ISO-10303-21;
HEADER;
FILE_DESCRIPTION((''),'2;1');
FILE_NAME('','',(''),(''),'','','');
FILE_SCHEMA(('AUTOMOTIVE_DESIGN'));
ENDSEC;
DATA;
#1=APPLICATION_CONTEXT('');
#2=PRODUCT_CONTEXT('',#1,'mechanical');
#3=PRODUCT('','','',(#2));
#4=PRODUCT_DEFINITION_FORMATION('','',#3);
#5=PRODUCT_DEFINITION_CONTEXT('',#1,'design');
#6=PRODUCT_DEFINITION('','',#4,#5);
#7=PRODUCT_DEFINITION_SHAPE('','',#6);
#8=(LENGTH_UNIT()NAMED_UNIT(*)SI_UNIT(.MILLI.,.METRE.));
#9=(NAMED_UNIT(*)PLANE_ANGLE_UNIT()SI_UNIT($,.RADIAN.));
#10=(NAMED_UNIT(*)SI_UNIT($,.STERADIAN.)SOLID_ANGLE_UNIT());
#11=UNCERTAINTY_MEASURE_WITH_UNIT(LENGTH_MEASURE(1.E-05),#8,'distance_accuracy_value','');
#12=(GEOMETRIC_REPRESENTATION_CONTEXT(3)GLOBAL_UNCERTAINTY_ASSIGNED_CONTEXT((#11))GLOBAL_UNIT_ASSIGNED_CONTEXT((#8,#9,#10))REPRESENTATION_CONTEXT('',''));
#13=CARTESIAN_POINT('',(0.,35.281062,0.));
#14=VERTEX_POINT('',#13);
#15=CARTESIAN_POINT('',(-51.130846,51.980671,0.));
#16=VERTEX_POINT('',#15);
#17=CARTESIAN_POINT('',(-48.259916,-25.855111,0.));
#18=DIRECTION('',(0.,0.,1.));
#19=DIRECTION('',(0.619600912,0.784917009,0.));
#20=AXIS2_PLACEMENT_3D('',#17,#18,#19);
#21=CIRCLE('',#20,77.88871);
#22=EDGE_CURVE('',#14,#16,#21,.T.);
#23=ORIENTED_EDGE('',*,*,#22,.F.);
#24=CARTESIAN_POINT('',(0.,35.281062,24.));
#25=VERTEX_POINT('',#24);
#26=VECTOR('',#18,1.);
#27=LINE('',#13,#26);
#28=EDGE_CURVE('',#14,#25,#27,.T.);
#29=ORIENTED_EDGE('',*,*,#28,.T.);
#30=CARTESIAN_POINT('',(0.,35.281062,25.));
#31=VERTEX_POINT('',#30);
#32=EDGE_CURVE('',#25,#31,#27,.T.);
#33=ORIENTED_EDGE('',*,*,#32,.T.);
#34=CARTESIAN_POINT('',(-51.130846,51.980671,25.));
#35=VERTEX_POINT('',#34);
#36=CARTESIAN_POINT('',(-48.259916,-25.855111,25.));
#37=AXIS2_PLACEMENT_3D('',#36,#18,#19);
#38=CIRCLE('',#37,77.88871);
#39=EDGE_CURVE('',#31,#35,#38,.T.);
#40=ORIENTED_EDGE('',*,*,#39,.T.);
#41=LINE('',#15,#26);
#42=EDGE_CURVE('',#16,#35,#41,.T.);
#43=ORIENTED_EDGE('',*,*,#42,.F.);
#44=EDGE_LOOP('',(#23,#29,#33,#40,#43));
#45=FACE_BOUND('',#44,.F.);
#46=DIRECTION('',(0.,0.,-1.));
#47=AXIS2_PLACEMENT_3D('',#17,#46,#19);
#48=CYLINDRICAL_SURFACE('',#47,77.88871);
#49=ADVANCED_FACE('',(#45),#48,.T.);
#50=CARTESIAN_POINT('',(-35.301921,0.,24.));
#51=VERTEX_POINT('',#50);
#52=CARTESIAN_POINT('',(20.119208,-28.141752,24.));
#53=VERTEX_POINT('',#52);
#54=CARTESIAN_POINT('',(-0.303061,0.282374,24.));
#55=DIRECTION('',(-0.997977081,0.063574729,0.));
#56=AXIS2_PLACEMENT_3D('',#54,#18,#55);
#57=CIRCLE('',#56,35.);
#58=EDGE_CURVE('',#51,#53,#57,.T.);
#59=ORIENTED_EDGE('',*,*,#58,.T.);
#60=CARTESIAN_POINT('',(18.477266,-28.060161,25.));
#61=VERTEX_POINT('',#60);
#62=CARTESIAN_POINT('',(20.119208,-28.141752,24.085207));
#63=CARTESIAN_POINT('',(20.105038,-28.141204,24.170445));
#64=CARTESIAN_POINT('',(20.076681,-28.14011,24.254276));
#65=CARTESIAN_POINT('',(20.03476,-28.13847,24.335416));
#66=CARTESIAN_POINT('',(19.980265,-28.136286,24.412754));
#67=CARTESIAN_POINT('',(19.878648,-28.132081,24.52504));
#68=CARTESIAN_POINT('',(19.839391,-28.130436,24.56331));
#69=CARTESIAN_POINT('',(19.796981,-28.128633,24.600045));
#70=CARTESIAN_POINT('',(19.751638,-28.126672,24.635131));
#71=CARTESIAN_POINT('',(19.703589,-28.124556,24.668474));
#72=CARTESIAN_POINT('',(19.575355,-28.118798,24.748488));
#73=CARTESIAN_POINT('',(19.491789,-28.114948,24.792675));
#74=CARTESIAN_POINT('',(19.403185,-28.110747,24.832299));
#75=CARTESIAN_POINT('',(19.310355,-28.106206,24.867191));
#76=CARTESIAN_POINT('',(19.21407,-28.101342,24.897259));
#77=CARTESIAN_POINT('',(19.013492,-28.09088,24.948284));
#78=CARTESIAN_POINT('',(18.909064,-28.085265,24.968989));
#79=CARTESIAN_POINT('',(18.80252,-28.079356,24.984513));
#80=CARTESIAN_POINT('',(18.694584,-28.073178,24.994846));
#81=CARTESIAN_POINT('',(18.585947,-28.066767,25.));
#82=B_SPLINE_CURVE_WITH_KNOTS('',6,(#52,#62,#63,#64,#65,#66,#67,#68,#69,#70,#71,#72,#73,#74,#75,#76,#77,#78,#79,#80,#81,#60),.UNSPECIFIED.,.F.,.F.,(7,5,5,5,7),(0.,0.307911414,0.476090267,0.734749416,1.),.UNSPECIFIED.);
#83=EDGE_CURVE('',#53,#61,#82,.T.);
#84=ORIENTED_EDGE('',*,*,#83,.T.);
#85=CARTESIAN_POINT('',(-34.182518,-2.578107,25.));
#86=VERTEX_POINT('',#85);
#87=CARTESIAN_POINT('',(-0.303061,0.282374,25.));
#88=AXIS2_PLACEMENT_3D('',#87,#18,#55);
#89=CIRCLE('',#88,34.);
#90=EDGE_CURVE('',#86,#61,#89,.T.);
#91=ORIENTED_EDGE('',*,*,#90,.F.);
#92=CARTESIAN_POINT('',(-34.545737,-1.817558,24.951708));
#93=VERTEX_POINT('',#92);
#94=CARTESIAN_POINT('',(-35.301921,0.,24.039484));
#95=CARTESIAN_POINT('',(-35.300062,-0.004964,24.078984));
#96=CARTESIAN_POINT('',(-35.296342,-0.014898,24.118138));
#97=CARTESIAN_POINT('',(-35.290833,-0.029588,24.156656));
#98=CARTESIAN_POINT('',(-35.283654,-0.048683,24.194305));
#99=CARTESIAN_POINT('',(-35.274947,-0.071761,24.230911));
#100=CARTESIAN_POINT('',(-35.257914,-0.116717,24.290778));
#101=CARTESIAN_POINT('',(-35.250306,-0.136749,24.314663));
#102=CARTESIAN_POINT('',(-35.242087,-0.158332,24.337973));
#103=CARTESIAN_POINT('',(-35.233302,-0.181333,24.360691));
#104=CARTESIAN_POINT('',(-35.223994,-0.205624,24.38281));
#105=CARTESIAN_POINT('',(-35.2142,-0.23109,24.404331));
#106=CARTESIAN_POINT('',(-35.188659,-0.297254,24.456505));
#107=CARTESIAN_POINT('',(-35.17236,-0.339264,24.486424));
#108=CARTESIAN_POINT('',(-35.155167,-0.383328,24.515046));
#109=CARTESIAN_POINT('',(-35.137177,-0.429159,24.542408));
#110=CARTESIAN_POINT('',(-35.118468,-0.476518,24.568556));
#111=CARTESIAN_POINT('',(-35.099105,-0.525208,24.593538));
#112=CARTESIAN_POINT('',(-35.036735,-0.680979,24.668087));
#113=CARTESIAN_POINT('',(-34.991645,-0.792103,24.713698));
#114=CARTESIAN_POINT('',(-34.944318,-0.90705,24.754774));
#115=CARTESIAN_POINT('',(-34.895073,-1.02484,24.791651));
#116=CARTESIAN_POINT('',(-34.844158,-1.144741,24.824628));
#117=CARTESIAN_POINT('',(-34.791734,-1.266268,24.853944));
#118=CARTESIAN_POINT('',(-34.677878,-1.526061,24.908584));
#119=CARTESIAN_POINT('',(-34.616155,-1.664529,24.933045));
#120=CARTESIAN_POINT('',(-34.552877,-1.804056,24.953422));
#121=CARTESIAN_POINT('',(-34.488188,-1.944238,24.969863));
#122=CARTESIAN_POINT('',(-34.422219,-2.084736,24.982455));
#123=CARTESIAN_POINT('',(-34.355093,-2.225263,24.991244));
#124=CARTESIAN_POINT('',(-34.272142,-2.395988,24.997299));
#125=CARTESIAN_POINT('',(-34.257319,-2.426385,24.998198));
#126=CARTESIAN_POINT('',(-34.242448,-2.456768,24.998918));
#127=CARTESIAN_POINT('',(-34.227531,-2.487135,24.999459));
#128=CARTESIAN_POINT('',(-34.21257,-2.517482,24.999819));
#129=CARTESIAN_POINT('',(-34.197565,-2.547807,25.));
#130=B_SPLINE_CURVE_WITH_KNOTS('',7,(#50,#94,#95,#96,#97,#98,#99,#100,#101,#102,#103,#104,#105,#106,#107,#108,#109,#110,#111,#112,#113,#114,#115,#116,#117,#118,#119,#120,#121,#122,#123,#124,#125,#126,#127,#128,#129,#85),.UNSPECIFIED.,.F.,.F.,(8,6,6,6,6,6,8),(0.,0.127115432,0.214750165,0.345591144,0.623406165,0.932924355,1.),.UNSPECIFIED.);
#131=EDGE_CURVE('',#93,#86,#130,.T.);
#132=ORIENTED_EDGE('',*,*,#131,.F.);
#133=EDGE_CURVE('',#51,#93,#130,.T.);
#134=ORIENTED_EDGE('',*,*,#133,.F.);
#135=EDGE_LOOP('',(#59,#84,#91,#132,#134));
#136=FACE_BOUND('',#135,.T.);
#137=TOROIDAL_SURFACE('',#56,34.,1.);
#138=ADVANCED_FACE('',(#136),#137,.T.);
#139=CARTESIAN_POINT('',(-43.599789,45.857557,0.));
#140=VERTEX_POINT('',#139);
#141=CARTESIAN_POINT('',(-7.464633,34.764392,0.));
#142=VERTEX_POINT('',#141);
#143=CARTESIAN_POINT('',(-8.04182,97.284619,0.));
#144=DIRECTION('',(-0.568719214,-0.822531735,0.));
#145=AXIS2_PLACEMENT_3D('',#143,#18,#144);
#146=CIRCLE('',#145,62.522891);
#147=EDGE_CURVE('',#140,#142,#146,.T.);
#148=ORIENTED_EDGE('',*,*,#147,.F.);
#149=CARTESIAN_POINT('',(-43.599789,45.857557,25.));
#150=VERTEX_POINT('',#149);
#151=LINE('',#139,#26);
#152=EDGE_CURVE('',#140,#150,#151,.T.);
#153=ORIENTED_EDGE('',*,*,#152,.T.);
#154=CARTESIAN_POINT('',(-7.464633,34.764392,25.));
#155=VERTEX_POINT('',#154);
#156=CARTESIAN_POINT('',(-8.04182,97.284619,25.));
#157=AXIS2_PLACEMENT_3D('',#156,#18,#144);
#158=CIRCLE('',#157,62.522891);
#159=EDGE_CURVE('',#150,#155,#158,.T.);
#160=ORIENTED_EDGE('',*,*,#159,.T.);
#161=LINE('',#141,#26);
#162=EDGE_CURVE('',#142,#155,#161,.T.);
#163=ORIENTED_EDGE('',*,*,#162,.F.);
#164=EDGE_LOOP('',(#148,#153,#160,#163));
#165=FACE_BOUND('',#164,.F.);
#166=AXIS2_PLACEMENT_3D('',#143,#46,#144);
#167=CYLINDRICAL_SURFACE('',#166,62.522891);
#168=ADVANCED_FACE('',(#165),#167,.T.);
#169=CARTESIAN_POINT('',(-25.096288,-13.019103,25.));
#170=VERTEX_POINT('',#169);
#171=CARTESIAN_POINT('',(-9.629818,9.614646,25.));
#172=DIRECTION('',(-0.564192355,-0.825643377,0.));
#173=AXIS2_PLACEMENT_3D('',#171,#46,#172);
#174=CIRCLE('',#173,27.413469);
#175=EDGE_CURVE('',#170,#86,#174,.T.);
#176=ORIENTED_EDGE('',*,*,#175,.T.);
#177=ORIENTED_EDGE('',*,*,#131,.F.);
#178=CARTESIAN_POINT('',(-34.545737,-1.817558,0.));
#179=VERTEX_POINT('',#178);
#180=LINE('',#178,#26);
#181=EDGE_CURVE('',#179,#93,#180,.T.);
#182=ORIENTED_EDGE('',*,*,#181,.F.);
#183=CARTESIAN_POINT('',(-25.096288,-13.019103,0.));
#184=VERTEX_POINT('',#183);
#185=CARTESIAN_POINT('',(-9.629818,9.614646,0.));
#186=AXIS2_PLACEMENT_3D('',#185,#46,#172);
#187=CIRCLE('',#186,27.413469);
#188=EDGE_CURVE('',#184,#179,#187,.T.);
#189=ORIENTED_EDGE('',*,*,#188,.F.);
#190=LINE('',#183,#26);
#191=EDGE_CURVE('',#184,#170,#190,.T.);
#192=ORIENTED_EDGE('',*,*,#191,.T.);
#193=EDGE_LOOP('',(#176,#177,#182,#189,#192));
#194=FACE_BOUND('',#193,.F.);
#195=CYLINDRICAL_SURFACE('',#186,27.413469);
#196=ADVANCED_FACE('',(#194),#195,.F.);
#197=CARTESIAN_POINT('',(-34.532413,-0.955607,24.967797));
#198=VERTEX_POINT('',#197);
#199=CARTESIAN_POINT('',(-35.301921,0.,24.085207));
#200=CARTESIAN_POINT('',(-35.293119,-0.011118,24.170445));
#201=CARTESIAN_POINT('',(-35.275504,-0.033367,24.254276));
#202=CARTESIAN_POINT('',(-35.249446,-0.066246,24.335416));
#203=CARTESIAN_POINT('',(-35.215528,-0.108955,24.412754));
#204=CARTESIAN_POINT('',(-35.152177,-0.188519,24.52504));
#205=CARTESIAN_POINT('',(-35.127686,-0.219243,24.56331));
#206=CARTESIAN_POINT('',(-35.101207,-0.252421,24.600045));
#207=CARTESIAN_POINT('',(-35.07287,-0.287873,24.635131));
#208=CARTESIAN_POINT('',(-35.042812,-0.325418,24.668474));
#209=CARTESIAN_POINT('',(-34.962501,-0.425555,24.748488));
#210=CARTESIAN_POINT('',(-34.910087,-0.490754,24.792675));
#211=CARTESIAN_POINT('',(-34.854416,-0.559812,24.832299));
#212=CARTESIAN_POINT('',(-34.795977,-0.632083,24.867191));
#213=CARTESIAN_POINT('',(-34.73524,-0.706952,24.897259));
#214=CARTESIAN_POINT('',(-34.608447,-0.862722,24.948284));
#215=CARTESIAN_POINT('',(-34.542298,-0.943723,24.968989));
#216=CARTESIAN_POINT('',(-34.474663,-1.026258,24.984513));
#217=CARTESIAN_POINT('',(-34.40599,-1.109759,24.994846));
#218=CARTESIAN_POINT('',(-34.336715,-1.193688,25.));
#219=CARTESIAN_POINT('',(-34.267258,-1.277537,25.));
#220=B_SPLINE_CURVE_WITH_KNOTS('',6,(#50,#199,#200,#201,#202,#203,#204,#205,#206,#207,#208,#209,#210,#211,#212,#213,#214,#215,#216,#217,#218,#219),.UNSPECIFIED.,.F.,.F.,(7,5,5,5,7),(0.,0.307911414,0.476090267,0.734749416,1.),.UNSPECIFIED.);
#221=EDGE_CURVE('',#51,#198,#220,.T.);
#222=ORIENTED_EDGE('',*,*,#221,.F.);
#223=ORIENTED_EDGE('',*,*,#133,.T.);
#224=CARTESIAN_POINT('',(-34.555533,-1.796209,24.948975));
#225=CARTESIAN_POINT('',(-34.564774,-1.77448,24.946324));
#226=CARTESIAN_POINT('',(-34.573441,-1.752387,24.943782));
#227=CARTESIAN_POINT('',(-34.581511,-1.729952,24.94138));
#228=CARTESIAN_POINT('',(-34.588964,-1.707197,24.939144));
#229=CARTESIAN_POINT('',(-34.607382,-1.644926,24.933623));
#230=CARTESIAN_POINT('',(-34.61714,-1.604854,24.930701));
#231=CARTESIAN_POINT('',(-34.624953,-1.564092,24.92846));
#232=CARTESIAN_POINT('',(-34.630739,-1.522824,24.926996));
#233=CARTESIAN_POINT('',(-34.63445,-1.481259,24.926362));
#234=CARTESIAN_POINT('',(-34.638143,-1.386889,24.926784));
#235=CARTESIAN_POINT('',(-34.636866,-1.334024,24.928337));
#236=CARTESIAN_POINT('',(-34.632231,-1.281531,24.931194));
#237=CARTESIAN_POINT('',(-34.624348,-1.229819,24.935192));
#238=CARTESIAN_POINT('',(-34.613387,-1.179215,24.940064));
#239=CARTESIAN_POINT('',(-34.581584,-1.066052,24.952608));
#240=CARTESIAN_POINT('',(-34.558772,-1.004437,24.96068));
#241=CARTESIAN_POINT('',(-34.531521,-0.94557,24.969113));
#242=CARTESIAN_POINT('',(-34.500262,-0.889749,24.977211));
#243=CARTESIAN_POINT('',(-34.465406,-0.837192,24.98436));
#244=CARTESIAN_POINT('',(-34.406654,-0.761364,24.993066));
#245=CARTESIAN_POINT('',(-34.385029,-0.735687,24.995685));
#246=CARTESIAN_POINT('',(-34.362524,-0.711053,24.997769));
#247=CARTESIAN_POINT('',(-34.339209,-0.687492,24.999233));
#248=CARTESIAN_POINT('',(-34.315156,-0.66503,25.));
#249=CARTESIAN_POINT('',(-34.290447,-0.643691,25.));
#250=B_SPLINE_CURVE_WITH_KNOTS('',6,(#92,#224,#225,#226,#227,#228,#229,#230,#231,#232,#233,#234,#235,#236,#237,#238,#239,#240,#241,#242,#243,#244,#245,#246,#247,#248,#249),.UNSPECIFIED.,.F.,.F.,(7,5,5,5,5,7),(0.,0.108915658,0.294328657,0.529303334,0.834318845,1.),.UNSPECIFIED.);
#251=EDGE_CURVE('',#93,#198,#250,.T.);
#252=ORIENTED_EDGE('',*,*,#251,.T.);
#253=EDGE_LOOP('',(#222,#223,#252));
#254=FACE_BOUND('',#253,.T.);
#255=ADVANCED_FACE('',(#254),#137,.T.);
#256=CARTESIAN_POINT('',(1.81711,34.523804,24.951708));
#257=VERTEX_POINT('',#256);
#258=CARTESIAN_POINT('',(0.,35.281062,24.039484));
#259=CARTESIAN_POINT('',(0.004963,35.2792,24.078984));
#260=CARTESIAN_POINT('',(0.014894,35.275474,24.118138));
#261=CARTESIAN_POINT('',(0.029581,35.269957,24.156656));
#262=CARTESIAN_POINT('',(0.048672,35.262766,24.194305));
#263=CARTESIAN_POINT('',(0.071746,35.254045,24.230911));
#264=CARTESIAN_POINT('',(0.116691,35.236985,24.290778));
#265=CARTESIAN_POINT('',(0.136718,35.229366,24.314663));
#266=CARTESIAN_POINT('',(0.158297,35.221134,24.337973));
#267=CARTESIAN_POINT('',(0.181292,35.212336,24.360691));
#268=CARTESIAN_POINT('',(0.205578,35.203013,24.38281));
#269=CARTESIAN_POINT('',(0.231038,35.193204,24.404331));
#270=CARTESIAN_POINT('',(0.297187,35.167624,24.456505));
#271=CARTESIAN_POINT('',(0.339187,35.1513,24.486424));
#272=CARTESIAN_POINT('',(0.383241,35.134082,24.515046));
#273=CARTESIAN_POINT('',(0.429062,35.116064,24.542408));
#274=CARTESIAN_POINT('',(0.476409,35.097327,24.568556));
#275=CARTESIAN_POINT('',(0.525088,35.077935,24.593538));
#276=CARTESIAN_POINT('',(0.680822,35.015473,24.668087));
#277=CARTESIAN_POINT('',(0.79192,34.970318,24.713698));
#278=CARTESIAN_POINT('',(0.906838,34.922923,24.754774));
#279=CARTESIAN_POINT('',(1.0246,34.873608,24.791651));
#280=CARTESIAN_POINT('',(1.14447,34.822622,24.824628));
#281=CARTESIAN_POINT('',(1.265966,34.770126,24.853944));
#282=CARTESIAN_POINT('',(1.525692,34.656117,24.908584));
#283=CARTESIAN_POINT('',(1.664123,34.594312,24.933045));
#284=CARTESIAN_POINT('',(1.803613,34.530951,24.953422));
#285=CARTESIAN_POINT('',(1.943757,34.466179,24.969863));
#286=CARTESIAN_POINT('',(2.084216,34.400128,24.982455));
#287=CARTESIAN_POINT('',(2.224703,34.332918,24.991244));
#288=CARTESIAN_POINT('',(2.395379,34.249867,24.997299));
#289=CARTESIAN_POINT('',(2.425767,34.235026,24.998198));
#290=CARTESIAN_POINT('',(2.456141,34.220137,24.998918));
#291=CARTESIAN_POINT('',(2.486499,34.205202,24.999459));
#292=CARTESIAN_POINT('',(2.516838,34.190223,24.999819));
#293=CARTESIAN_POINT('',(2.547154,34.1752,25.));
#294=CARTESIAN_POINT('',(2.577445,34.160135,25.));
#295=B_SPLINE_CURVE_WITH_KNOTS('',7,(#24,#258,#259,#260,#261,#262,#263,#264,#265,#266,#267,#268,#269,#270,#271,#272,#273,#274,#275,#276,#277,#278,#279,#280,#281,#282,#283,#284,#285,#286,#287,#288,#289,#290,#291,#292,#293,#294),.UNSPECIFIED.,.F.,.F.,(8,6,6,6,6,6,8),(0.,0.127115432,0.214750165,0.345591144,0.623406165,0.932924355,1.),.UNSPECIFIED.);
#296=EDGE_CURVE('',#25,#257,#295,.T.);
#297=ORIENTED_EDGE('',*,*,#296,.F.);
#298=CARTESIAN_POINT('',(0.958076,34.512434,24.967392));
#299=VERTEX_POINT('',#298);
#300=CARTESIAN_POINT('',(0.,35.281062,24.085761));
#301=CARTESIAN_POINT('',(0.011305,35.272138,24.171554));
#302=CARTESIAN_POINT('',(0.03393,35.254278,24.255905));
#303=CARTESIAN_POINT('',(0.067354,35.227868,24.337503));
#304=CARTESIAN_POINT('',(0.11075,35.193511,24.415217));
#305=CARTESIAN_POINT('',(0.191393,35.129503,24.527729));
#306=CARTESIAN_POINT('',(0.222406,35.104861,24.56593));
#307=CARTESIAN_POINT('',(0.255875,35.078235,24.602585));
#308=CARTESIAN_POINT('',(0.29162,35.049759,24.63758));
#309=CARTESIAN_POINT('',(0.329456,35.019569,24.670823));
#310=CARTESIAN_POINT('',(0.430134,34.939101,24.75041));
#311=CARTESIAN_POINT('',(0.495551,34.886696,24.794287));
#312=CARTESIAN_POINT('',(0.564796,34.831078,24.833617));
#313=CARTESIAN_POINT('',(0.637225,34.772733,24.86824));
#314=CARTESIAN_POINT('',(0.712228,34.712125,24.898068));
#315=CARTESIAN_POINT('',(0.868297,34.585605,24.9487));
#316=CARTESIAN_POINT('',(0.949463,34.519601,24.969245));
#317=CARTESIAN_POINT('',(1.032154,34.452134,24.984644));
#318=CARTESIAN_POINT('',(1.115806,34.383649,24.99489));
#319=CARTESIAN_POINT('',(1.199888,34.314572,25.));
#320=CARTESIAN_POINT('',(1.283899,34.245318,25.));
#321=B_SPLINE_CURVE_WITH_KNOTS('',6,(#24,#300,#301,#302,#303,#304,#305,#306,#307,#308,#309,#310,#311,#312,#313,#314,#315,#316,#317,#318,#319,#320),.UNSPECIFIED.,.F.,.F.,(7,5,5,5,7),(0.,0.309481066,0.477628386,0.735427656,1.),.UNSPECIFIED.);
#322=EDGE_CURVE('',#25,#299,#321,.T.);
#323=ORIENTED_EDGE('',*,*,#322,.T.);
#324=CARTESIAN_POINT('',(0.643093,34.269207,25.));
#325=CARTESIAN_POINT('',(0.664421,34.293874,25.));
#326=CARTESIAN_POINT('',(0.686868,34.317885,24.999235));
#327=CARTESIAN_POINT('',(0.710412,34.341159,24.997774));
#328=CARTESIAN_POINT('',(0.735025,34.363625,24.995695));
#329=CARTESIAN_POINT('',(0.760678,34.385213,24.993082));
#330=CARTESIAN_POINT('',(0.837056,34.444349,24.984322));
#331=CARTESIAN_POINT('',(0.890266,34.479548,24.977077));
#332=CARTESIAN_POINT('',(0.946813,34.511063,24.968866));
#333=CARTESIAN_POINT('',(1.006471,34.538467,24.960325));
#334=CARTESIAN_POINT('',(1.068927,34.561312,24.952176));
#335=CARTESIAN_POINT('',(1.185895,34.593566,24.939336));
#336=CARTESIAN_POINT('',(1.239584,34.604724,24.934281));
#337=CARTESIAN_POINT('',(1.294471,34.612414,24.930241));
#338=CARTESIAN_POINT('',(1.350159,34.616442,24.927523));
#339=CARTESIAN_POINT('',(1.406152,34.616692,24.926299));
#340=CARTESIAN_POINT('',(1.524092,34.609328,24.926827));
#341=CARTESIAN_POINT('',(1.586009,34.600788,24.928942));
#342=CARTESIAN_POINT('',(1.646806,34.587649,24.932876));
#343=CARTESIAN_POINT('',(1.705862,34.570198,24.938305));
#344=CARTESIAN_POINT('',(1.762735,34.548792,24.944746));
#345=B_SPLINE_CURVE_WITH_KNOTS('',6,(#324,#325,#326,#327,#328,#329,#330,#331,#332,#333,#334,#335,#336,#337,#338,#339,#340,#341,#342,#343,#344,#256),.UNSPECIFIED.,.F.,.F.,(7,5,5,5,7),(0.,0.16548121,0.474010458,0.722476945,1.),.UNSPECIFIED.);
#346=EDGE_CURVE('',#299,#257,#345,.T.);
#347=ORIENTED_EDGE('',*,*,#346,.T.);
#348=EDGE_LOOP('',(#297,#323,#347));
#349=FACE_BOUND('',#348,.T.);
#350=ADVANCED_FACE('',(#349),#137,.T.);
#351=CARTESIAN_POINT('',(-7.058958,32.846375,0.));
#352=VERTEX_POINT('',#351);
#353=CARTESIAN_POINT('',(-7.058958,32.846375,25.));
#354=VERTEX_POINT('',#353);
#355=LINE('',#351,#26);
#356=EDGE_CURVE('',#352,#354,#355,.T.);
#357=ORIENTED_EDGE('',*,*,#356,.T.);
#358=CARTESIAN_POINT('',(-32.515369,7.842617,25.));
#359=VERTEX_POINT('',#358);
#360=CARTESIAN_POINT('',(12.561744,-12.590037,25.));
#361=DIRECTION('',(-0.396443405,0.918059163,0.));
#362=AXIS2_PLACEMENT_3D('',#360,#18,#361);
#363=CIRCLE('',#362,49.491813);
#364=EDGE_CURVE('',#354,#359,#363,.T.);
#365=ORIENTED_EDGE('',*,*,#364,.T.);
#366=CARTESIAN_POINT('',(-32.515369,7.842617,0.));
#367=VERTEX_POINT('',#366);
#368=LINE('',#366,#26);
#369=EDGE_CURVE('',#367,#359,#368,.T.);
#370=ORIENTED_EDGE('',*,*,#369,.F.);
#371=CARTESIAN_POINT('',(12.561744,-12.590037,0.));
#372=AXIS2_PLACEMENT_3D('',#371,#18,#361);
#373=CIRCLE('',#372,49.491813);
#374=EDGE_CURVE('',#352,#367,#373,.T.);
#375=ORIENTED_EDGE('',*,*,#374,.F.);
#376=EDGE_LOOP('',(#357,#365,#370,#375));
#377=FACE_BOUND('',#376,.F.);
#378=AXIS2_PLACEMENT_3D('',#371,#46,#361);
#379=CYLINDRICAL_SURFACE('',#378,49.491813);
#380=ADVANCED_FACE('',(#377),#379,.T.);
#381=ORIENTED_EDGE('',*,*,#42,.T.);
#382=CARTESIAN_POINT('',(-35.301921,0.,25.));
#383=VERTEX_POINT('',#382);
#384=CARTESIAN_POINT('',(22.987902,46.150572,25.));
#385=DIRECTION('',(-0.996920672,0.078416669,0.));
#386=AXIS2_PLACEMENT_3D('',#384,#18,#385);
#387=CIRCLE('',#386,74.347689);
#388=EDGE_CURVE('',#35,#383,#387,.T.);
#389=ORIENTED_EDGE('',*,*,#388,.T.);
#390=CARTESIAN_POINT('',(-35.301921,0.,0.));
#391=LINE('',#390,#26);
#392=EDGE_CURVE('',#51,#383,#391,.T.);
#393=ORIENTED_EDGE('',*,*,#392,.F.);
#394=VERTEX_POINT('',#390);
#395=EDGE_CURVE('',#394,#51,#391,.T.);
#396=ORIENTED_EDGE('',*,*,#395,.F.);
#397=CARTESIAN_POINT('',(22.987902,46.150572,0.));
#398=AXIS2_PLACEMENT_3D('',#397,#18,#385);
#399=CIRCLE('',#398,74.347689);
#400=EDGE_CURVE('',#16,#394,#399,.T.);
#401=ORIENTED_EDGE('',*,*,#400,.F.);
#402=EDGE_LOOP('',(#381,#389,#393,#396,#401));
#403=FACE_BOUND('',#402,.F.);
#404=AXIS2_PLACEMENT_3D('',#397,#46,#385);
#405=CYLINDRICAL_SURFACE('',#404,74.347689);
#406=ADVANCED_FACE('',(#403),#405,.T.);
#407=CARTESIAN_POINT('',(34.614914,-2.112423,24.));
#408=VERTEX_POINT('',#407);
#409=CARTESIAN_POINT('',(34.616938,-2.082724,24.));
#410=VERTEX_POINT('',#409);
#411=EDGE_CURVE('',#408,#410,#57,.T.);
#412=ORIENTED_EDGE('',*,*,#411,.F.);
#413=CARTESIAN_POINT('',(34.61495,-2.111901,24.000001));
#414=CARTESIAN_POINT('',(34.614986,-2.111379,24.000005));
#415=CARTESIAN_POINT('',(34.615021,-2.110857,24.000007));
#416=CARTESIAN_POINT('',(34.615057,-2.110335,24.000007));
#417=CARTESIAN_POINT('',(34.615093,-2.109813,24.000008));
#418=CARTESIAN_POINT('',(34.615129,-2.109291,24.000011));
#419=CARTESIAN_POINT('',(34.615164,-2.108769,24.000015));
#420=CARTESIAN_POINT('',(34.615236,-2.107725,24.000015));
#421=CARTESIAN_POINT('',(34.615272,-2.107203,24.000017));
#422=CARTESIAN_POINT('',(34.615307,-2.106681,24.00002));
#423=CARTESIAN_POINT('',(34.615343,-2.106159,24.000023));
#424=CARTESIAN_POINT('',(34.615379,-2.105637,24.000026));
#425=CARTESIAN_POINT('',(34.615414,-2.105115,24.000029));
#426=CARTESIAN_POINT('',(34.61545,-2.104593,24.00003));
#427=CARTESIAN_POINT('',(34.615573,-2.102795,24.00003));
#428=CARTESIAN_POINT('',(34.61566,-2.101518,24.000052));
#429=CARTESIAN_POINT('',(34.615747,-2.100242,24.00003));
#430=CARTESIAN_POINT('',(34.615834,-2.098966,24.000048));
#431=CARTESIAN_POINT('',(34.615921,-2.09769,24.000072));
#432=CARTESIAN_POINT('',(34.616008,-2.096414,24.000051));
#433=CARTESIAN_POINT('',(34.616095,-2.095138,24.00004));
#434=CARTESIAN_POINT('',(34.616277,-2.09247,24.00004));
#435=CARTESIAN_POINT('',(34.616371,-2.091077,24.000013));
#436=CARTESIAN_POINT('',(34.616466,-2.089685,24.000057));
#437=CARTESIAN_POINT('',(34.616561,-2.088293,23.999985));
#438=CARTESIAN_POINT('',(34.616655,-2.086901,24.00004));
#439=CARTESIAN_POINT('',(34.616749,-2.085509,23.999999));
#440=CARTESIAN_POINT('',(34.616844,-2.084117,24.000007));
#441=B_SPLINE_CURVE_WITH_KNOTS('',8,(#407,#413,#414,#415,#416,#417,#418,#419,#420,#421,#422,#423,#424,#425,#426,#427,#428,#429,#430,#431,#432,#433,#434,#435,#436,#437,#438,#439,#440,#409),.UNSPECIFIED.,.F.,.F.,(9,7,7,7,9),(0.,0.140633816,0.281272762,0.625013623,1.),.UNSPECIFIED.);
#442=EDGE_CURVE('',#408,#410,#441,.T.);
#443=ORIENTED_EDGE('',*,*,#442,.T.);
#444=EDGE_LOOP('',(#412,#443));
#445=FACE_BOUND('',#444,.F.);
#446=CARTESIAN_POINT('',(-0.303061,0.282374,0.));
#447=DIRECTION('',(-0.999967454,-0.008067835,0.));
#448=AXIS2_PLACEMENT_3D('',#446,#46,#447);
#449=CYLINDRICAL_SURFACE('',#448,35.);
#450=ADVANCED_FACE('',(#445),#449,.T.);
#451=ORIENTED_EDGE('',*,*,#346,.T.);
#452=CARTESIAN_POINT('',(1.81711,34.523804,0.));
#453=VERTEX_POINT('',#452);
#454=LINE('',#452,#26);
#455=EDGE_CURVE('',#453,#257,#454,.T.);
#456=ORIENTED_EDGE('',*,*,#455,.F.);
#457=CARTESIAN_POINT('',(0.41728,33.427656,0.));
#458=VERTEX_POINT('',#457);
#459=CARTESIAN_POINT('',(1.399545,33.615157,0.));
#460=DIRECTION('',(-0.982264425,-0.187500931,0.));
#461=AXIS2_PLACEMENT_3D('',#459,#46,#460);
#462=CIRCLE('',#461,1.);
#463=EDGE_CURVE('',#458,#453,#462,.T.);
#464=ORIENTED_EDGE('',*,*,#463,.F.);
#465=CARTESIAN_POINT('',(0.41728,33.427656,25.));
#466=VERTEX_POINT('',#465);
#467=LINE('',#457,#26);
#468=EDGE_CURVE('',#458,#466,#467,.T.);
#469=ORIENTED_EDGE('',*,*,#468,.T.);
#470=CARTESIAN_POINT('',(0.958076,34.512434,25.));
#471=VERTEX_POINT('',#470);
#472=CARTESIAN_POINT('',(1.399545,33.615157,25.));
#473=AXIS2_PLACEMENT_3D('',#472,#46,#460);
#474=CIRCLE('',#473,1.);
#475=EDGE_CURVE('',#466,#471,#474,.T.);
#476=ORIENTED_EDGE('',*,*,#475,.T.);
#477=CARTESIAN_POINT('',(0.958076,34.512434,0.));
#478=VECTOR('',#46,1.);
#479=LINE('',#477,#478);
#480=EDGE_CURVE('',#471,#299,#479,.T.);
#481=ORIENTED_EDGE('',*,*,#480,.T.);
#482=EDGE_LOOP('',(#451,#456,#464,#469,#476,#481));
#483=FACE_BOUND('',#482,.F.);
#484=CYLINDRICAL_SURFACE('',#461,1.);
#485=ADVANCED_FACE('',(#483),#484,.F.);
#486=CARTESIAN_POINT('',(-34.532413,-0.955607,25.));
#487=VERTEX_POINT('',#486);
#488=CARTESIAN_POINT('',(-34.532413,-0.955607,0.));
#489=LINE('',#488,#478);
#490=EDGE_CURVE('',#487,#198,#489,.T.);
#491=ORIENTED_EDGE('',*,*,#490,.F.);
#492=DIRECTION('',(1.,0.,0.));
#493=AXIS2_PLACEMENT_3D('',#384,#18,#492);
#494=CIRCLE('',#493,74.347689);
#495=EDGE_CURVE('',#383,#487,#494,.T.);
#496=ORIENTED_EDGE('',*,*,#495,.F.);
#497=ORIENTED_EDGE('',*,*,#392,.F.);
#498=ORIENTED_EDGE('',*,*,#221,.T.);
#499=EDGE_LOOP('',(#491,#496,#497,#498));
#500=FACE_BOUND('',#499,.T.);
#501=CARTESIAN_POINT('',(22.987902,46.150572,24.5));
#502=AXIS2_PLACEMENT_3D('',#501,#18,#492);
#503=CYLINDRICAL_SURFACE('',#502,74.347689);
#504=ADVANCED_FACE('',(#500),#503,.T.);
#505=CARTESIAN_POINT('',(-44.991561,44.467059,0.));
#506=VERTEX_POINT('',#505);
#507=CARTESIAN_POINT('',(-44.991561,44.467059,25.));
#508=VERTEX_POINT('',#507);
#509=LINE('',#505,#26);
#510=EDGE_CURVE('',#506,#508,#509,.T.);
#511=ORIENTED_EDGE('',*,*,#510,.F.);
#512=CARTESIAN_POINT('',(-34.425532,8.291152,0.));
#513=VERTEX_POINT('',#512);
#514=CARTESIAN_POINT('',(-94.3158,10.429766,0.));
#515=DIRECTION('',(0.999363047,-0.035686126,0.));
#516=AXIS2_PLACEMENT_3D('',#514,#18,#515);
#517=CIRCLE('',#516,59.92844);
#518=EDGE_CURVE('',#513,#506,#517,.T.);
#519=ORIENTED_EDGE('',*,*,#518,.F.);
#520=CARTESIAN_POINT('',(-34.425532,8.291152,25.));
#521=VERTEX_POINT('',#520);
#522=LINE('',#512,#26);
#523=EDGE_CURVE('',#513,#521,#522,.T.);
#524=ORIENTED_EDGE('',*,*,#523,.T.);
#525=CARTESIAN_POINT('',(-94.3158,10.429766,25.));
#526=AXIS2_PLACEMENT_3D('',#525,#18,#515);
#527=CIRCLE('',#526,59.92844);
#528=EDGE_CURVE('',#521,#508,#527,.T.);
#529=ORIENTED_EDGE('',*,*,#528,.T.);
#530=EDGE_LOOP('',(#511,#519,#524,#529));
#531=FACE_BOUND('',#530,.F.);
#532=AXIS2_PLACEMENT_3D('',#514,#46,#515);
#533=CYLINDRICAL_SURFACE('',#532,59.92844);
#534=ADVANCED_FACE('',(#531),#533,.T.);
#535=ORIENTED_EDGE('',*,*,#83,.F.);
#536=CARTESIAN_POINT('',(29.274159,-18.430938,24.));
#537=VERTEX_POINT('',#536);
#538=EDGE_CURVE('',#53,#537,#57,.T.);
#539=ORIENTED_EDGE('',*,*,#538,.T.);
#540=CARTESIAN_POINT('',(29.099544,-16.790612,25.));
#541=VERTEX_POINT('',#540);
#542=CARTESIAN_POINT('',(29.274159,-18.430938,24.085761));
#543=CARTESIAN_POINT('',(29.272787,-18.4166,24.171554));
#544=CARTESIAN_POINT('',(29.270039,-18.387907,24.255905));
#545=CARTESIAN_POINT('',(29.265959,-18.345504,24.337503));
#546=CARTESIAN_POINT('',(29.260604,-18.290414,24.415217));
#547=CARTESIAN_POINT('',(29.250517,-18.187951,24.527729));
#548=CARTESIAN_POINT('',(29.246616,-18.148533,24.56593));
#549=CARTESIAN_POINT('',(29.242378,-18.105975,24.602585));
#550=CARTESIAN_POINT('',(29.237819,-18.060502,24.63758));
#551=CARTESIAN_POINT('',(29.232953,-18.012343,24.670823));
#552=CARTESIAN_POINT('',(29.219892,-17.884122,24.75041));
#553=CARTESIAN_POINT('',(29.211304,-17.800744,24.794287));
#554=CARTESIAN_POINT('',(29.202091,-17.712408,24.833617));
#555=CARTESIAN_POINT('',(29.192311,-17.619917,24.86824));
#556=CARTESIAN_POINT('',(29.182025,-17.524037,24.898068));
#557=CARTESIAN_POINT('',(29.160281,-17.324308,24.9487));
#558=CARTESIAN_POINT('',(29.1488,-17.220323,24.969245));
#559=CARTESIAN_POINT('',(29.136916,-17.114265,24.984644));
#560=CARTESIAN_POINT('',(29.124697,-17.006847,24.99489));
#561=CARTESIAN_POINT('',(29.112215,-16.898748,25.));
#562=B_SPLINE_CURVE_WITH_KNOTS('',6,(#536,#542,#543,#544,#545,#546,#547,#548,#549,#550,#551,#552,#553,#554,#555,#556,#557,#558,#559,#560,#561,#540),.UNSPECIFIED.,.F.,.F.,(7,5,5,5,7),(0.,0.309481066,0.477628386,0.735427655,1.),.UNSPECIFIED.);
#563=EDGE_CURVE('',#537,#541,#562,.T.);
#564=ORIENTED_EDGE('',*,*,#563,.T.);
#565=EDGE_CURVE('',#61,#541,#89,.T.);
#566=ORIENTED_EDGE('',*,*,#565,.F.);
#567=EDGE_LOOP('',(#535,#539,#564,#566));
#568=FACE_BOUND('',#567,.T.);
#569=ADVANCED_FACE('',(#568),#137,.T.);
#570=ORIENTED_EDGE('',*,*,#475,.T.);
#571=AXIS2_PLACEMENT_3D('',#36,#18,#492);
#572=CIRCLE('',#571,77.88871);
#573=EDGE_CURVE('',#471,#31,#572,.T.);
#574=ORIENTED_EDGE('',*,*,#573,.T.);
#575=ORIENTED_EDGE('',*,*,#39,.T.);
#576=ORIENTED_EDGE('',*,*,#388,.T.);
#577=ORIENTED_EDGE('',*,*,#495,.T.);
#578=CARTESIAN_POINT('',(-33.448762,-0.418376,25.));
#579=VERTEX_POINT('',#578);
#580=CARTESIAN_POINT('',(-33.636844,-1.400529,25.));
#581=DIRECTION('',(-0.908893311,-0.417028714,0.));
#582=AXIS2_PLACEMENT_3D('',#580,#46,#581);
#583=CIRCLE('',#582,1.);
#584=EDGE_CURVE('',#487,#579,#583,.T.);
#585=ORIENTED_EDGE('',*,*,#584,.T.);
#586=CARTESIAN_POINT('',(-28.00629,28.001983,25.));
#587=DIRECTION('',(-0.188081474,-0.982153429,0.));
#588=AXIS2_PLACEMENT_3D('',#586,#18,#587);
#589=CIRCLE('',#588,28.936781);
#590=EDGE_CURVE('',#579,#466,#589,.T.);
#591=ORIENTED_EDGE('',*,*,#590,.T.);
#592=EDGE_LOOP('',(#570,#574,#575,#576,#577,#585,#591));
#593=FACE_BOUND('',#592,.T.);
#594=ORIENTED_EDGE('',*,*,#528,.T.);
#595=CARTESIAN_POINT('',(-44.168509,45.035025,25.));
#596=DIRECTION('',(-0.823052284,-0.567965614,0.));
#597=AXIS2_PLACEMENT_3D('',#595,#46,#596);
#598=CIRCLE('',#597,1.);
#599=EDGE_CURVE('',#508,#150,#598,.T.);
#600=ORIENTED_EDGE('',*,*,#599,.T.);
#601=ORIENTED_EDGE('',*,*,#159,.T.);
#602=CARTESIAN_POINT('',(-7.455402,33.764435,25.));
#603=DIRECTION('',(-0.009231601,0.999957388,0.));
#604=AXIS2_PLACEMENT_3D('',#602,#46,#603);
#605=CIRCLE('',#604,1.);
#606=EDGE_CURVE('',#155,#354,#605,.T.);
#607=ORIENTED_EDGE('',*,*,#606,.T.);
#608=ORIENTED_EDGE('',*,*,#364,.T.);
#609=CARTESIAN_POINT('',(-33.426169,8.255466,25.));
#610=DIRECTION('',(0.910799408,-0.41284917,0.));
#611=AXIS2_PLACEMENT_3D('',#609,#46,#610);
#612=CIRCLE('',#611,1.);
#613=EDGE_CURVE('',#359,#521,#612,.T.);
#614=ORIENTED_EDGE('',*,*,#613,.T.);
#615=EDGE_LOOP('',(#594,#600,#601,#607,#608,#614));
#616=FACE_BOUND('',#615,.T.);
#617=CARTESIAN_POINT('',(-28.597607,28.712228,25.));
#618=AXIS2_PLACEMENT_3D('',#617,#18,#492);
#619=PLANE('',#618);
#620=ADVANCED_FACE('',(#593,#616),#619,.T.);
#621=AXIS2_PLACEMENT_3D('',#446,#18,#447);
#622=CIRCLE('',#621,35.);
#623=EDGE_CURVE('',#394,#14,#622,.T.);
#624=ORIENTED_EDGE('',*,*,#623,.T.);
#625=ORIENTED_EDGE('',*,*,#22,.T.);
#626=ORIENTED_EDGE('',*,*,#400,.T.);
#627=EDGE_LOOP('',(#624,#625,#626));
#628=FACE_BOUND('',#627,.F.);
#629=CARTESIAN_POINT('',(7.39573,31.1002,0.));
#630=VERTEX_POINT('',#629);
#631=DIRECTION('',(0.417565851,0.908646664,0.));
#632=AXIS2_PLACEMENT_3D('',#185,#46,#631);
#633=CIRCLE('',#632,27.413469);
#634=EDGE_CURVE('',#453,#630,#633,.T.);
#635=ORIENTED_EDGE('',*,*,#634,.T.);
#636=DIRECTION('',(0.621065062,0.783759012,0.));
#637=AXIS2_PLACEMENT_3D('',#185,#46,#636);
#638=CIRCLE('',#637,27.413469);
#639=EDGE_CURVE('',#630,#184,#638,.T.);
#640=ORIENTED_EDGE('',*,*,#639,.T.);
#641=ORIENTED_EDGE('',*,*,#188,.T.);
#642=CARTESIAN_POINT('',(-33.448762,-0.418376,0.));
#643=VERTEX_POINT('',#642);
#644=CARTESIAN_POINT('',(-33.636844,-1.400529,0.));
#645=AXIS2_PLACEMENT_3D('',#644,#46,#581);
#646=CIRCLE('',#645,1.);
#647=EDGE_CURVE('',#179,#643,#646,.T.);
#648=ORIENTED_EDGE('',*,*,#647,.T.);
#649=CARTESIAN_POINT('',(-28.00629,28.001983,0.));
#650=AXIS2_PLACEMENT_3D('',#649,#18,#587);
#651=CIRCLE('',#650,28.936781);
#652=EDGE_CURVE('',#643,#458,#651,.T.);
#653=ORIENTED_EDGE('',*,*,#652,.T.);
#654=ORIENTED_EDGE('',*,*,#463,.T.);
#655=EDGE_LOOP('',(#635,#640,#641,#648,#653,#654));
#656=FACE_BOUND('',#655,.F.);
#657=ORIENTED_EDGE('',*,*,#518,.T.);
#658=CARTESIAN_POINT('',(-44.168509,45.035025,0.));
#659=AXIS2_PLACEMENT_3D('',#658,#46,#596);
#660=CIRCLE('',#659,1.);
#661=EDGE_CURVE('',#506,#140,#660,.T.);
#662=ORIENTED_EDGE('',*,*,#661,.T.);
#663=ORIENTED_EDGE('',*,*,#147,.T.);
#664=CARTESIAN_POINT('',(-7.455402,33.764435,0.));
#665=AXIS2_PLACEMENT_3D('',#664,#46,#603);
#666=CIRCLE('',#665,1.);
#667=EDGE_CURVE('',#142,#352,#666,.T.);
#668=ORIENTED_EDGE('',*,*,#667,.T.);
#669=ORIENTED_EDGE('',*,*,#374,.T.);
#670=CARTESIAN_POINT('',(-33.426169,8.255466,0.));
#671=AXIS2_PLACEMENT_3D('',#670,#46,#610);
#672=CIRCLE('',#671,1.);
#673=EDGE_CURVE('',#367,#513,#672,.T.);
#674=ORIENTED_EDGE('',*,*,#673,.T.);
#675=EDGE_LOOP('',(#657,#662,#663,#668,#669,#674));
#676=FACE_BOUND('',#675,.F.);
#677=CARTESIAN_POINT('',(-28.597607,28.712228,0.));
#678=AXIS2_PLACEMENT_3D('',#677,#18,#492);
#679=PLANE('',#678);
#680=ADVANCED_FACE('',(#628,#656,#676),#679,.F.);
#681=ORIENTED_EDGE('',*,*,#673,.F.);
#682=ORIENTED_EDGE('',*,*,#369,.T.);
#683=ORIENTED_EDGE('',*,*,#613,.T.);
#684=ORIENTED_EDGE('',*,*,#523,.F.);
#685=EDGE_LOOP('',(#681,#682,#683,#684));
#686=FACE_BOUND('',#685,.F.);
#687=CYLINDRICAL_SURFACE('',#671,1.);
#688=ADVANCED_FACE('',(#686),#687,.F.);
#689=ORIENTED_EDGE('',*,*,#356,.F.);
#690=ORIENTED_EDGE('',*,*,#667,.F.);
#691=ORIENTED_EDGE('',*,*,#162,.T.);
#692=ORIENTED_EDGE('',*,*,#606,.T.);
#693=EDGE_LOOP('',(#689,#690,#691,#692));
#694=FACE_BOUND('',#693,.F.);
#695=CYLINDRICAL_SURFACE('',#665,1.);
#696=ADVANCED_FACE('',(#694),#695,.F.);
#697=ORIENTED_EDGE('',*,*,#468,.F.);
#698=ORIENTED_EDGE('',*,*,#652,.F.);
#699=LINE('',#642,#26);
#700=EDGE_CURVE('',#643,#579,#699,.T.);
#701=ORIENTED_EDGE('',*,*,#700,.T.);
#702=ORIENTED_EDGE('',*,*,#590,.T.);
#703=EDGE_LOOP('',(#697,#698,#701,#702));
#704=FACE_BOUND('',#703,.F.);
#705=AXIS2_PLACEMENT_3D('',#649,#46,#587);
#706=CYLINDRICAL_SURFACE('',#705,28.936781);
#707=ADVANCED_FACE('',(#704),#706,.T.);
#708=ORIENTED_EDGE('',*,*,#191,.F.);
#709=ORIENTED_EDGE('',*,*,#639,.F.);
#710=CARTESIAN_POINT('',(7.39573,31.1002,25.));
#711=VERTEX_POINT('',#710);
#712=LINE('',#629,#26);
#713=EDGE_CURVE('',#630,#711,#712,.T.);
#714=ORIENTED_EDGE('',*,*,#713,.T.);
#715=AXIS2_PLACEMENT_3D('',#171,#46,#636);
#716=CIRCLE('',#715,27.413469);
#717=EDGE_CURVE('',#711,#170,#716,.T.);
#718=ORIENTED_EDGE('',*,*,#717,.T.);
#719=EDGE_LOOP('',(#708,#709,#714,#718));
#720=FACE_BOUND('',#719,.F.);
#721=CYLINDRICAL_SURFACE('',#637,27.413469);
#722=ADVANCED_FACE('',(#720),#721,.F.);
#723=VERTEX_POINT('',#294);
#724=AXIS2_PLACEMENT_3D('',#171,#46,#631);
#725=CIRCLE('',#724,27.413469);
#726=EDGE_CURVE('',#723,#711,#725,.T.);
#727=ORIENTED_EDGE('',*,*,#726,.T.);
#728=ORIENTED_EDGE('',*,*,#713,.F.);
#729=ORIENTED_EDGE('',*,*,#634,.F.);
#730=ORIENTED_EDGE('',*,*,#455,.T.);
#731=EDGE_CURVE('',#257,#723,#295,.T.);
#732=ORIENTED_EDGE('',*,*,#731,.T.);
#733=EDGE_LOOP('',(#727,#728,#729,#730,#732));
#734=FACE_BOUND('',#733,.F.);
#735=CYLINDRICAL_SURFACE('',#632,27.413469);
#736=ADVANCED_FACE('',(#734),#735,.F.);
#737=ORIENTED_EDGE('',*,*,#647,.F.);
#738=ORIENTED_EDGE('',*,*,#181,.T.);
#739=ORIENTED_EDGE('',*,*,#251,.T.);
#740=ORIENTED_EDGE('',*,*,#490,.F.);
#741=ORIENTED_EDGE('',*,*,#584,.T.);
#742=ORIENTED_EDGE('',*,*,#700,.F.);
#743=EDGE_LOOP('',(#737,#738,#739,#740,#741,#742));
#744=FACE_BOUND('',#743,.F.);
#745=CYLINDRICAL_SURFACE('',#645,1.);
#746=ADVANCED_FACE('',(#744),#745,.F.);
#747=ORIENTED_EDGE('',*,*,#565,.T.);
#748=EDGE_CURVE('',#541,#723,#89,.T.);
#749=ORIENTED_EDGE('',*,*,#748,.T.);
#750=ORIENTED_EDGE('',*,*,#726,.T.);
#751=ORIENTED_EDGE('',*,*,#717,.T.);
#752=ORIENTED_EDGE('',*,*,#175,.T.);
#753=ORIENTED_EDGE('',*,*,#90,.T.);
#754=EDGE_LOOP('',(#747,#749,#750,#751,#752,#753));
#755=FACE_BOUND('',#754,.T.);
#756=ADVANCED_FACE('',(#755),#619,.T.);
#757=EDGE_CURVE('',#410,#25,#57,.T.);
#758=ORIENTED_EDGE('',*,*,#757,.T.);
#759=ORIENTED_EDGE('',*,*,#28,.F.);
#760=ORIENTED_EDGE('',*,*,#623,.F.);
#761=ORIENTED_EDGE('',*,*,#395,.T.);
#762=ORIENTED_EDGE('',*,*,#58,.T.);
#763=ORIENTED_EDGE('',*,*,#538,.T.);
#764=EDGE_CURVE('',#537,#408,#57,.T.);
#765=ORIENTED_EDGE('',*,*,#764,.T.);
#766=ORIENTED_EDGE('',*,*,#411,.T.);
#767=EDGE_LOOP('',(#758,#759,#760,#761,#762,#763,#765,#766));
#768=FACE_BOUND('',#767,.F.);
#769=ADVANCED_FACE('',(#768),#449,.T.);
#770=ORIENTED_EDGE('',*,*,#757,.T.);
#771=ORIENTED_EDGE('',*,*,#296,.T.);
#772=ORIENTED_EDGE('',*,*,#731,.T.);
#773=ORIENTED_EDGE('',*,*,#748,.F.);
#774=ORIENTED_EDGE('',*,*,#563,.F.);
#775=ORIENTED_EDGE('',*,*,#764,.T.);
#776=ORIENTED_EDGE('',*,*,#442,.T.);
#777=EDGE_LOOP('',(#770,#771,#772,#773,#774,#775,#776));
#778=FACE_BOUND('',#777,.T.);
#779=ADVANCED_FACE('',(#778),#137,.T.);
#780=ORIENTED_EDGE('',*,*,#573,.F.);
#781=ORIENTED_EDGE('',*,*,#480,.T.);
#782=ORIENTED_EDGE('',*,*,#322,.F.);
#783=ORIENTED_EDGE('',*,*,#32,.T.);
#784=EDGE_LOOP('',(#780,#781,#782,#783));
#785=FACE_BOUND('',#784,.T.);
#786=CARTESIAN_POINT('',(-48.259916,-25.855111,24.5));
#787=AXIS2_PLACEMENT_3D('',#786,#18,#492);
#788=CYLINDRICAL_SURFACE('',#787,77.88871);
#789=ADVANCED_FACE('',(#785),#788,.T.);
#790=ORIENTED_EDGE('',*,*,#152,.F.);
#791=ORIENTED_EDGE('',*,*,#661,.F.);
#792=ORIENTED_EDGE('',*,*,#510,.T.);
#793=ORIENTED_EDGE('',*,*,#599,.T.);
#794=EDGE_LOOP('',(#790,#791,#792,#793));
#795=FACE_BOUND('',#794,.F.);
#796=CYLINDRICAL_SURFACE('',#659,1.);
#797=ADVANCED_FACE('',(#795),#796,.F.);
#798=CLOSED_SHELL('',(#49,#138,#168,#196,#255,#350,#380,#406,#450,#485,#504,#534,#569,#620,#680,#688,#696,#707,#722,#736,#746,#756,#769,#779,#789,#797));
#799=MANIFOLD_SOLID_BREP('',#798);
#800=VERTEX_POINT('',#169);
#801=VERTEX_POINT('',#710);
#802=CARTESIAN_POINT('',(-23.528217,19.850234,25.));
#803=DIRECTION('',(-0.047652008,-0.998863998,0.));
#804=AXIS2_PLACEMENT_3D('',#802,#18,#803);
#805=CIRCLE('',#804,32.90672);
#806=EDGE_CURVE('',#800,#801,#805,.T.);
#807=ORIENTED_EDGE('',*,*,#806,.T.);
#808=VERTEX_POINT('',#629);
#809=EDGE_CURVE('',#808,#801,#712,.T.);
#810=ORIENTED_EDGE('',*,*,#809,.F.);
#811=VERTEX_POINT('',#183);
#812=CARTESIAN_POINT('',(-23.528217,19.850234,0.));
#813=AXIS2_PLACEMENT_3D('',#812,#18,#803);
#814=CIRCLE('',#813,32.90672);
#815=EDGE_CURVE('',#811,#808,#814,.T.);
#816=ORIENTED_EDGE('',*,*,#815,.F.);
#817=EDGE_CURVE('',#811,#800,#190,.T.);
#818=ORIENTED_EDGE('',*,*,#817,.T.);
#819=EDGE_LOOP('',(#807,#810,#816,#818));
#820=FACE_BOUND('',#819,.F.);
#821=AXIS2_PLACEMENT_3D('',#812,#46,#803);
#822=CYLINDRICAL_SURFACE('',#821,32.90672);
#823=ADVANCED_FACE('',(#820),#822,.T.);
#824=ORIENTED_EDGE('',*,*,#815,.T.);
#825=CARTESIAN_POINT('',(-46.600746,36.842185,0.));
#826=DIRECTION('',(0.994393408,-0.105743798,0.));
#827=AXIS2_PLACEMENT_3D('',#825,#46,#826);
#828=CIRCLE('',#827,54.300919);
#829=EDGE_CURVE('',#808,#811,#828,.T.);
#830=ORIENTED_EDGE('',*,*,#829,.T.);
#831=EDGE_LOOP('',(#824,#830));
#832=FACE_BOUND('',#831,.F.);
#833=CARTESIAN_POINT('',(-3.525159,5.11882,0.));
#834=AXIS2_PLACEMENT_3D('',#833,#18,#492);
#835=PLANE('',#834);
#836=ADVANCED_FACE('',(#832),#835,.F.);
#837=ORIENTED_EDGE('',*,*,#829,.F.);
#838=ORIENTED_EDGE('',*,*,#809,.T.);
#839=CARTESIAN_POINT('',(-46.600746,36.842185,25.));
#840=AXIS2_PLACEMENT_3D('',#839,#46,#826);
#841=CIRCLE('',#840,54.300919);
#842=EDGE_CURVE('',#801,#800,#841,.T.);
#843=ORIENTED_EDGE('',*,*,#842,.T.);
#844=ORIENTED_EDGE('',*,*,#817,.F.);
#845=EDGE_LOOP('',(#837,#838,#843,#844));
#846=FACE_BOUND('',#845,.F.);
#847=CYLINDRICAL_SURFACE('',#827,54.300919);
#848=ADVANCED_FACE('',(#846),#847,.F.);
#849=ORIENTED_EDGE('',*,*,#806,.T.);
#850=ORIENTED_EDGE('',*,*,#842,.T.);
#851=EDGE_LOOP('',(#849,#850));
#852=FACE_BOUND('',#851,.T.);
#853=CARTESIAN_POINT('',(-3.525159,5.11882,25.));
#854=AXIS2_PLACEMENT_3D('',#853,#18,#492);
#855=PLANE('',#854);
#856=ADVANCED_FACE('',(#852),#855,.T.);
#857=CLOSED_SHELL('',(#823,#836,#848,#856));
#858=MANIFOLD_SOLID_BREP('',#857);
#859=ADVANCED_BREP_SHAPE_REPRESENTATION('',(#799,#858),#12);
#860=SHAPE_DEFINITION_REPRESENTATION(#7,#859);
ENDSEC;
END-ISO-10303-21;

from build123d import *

# Parameters (mm, degrees)
F1_DEPTH     = 25
F2_T3_ANGLE  = 277.2561785364
F2_S4_R      = 74.3476887017
F2_T5_DEPTH  = 55
F2_T8_ANGLE  = 277.2561785364
F2_S9_R      = 27.4134694575
F2_T10_DEPTH = 55
F2_T13_ANGLE = 277.2561785364
F2_S14_R     = 77.8887101347
F2_T15_DEPTH = 55


# Not quite as in the source:
# - a fillet or chamfer that OpenCascade refuses, or shapes differently, is made with other operations: its cross-section is extruded or revolved along the edge and cut away or added


with BuildPart() as f1:
    # F0 (on Top) → F1 (new body)
    with BuildSketch(Plane.XY):
        with BuildLine():
            ThreePointArc((-51.1308461428, 51.9806705415), (-48.1352657569, 24.4924590263), (-35.3019214927, 0))
            ThreePointArc((-35.3019214927, 0), (-11.9360610306, 11.9222525038), (0, 35.2810621262))
            ThreePointArc((0, 35.2810621262), (-24.0781203636, 48.1846884371), (-51.1308461428, 51.9806705415))
        make_face()
        with BuildLine():
            ThreePointArc((-44.9915609391, 44.4670594009), (-44.8752915408, 45.7424555435), (-43.5997894412, 45.8575567498))
            ThreePointArc((-43.5997894412, 45.8575567498), (-26.3906174951, 37.5147808031), (-7.4646334829, 34.7643919688))
            ThreePointArc((-7.4646334829, 34.7643919688), (-6.477046058, 33.9713642367), (-7.0589584771, 32.8463754179))
            ThreePointArc((-7.0589584771, 32.8463754179), (-22.1189253759, 22.7184704393), (-32.5153694664, 7.8426171017))
            ThreePointArc((-32.5153694664, 7.8426171017), (-33.6547664634, 7.2819452695), (-34.4255319223, 8.2911523976))
            ThreePointArc((-34.4255319223, 8.2911523976), (-36.7907949795, 27.2313042006), (-44.9915609391, 44.4670594009))
        make_face(mode=Mode.SUBTRACT)
        with BuildLine():
            ThreePointArc((0, 35.2810621262), (-11.9360610306, 11.9222525038), (-35.3019214927, 0))
            ThreePointArc((-35.3019214927, 0), (24.438361689, -24.4736760144), (0, 35.2810621262))
        make_face()
        with BuildLine():
            ThreePointArc((-25.0962880995, -13.0191033564), (-30.5834095399, -8.0614766695), (-34.5457372408, -1.817557767))
            ThreePointArc((-34.5457372408, -1.817557767), (-34.4238128575, -0.7835364223), (-33.4487624549, -0.4183756234))
            ThreePointArc((-33.4487624549, -0.4183756234), (-7.550944031, 7.5345428735), (0.4172802234, 33.4276561272))
            ThreePointArc((0.4172802234, 33.4276561272), (0.7830172712, 34.4024905278), (1.8171104998, 34.5238037218))
            ThreePointArc((1.8171104998, 34.5238037218), (4.7089665972, 32.9790968837), (7.3957298922, 31.1001998934))
            ThreePointArc((7.3957298922, 31.1001998934), (12.4436027104, -6.6415033518), (-25.0962880995, -13.0191033564))
        make_face(mode=Mode.SUBTRACT)
    extrude(amount=F1_DEPTH)

    # F2: fillet of radius 1 on 1 edges, made by hand


with BuildPart() as f1b:
    # F0 (on Top) → F1, piece 2 (new body)
    with BuildSketch(Plane.XY):
        with BuildLine():
            ThreePointArc((7.3957298922, 31.1001998934), (-2.8774572569, 4.6418152739), (-25.0962880995, -13.0191033564))
            ThreePointArc((-25.0962880995, -13.0191033564), (2.9683883517, 0.3365949576), (7.3957298922, 31.1001998934))
        make_face()
    extrude(amount=F1_DEPTH)


with BuildPart() as f2_tool1:
    # F2_s2 → F2_t3 (revolve)
    with BuildSketch(Plane(origin=(0.0166906563, 0.2620049283, 0), x_dir=(0, 0, 1), z_dir=(0.0635747294, 0.9979770808, 0))):
        with BuildLine():
            ThreePointArc((24, -35.320399384), (24.7071067812, -35.0275061652), (25, -34.320399384))
            Line((25, -34.320399384), (25, -35.320399384))
            Line((25, -35.320399384), (24, -35.320399384))
        make_face()
    revolve(axis=Axis((-0.3030605857, 0.2823742324, 25), (0, 0, 1)), revolution_arc=F2_T3_ANGLE)

    # F2_s4 → F2_t5 (cut, symmetric)
    with BuildSketch(Plane.XY.offset(24.5)):
        with Locations((22.9879016294, 46.1505724307)):
            Circle(F2_S4_R)
    extrude(amount=F2_T5_DEPTH, both=True, mode=Mode.SUBTRACT)


with BuildPart() as f2_tool6:
    # F2_s7 → F2_t8 (revolve)
    with BuildSketch(Plane(origin=(0.0166906563, 0.2620049283, 0), x_dir=(0, 0, 1), z_dir=(0.0635747294, 0.9979770808, 0))):
        with BuildLine():
            ThreePointArc((24, -35.320399384), (24.7071067812, -35.0275061652), (25, -34.320399384))
            Line((25, -34.320399384), (25, -35.320399384))
            Line((25, -35.320399384), (24, -35.320399384))
        make_face()
    revolve(axis=Axis((-0.3030605857, 0.2823742324, 25), (0, 0, 1)), revolution_arc=F2_T8_ANGLE)

    # F2_s9 → F2_t10 (cut, symmetric)
    with BuildSketch(Plane.XY.offset(24.5)):
        with Locations((-9.6298182077, 9.6146461515)):
            Circle(F2_S9_R)
    extrude(amount=F2_T10_DEPTH, both=True, mode=Mode.SUBTRACT)


with BuildPart() as f2_tool11:
    # F2_s12 → F2_t13 (revolve)
    with BuildSketch(Plane(origin=(0.0166906563, 0.2620049283, 0), x_dir=(0, 0, 1), z_dir=(0.0635747294, 0.9979770808, 0))):
        with BuildLine():
            ThreePointArc((24, -35.320399384), (24.7071067812, -35.0275061652), (25, -34.320399384))
            Line((25, -34.320399384), (25, -35.320399384))
            Line((25, -35.320399384), (24, -35.320399384))
        make_face()
    revolve(axis=Axis((-0.3030605857, 0.2823742324, 25), (0, 0, 1)), revolution_arc=F2_T13_ANGLE)

    # F2_s14 → F2_t15 (cut, symmetric)
    with BuildSketch(Plane.XY.offset(24.5)):
        with Locations((-48.2599157967, -25.8551112391)):
            Circle(F2_S14_R)
    extrude(amount=F2_T15_DEPTH, both=True, mode=Mode.SUBTRACT)


with BuildPart() as f1_1:
    add(f1.part)

    # F2_t16: cut F2_tool1, F2_tool6, F2_tool11
    add([f2_tool1.part, f2_tool6.part, f2_tool11.part], mode=Mode.SUBTRACT)


solid = Compound([f1b.part, f1_1.part])
